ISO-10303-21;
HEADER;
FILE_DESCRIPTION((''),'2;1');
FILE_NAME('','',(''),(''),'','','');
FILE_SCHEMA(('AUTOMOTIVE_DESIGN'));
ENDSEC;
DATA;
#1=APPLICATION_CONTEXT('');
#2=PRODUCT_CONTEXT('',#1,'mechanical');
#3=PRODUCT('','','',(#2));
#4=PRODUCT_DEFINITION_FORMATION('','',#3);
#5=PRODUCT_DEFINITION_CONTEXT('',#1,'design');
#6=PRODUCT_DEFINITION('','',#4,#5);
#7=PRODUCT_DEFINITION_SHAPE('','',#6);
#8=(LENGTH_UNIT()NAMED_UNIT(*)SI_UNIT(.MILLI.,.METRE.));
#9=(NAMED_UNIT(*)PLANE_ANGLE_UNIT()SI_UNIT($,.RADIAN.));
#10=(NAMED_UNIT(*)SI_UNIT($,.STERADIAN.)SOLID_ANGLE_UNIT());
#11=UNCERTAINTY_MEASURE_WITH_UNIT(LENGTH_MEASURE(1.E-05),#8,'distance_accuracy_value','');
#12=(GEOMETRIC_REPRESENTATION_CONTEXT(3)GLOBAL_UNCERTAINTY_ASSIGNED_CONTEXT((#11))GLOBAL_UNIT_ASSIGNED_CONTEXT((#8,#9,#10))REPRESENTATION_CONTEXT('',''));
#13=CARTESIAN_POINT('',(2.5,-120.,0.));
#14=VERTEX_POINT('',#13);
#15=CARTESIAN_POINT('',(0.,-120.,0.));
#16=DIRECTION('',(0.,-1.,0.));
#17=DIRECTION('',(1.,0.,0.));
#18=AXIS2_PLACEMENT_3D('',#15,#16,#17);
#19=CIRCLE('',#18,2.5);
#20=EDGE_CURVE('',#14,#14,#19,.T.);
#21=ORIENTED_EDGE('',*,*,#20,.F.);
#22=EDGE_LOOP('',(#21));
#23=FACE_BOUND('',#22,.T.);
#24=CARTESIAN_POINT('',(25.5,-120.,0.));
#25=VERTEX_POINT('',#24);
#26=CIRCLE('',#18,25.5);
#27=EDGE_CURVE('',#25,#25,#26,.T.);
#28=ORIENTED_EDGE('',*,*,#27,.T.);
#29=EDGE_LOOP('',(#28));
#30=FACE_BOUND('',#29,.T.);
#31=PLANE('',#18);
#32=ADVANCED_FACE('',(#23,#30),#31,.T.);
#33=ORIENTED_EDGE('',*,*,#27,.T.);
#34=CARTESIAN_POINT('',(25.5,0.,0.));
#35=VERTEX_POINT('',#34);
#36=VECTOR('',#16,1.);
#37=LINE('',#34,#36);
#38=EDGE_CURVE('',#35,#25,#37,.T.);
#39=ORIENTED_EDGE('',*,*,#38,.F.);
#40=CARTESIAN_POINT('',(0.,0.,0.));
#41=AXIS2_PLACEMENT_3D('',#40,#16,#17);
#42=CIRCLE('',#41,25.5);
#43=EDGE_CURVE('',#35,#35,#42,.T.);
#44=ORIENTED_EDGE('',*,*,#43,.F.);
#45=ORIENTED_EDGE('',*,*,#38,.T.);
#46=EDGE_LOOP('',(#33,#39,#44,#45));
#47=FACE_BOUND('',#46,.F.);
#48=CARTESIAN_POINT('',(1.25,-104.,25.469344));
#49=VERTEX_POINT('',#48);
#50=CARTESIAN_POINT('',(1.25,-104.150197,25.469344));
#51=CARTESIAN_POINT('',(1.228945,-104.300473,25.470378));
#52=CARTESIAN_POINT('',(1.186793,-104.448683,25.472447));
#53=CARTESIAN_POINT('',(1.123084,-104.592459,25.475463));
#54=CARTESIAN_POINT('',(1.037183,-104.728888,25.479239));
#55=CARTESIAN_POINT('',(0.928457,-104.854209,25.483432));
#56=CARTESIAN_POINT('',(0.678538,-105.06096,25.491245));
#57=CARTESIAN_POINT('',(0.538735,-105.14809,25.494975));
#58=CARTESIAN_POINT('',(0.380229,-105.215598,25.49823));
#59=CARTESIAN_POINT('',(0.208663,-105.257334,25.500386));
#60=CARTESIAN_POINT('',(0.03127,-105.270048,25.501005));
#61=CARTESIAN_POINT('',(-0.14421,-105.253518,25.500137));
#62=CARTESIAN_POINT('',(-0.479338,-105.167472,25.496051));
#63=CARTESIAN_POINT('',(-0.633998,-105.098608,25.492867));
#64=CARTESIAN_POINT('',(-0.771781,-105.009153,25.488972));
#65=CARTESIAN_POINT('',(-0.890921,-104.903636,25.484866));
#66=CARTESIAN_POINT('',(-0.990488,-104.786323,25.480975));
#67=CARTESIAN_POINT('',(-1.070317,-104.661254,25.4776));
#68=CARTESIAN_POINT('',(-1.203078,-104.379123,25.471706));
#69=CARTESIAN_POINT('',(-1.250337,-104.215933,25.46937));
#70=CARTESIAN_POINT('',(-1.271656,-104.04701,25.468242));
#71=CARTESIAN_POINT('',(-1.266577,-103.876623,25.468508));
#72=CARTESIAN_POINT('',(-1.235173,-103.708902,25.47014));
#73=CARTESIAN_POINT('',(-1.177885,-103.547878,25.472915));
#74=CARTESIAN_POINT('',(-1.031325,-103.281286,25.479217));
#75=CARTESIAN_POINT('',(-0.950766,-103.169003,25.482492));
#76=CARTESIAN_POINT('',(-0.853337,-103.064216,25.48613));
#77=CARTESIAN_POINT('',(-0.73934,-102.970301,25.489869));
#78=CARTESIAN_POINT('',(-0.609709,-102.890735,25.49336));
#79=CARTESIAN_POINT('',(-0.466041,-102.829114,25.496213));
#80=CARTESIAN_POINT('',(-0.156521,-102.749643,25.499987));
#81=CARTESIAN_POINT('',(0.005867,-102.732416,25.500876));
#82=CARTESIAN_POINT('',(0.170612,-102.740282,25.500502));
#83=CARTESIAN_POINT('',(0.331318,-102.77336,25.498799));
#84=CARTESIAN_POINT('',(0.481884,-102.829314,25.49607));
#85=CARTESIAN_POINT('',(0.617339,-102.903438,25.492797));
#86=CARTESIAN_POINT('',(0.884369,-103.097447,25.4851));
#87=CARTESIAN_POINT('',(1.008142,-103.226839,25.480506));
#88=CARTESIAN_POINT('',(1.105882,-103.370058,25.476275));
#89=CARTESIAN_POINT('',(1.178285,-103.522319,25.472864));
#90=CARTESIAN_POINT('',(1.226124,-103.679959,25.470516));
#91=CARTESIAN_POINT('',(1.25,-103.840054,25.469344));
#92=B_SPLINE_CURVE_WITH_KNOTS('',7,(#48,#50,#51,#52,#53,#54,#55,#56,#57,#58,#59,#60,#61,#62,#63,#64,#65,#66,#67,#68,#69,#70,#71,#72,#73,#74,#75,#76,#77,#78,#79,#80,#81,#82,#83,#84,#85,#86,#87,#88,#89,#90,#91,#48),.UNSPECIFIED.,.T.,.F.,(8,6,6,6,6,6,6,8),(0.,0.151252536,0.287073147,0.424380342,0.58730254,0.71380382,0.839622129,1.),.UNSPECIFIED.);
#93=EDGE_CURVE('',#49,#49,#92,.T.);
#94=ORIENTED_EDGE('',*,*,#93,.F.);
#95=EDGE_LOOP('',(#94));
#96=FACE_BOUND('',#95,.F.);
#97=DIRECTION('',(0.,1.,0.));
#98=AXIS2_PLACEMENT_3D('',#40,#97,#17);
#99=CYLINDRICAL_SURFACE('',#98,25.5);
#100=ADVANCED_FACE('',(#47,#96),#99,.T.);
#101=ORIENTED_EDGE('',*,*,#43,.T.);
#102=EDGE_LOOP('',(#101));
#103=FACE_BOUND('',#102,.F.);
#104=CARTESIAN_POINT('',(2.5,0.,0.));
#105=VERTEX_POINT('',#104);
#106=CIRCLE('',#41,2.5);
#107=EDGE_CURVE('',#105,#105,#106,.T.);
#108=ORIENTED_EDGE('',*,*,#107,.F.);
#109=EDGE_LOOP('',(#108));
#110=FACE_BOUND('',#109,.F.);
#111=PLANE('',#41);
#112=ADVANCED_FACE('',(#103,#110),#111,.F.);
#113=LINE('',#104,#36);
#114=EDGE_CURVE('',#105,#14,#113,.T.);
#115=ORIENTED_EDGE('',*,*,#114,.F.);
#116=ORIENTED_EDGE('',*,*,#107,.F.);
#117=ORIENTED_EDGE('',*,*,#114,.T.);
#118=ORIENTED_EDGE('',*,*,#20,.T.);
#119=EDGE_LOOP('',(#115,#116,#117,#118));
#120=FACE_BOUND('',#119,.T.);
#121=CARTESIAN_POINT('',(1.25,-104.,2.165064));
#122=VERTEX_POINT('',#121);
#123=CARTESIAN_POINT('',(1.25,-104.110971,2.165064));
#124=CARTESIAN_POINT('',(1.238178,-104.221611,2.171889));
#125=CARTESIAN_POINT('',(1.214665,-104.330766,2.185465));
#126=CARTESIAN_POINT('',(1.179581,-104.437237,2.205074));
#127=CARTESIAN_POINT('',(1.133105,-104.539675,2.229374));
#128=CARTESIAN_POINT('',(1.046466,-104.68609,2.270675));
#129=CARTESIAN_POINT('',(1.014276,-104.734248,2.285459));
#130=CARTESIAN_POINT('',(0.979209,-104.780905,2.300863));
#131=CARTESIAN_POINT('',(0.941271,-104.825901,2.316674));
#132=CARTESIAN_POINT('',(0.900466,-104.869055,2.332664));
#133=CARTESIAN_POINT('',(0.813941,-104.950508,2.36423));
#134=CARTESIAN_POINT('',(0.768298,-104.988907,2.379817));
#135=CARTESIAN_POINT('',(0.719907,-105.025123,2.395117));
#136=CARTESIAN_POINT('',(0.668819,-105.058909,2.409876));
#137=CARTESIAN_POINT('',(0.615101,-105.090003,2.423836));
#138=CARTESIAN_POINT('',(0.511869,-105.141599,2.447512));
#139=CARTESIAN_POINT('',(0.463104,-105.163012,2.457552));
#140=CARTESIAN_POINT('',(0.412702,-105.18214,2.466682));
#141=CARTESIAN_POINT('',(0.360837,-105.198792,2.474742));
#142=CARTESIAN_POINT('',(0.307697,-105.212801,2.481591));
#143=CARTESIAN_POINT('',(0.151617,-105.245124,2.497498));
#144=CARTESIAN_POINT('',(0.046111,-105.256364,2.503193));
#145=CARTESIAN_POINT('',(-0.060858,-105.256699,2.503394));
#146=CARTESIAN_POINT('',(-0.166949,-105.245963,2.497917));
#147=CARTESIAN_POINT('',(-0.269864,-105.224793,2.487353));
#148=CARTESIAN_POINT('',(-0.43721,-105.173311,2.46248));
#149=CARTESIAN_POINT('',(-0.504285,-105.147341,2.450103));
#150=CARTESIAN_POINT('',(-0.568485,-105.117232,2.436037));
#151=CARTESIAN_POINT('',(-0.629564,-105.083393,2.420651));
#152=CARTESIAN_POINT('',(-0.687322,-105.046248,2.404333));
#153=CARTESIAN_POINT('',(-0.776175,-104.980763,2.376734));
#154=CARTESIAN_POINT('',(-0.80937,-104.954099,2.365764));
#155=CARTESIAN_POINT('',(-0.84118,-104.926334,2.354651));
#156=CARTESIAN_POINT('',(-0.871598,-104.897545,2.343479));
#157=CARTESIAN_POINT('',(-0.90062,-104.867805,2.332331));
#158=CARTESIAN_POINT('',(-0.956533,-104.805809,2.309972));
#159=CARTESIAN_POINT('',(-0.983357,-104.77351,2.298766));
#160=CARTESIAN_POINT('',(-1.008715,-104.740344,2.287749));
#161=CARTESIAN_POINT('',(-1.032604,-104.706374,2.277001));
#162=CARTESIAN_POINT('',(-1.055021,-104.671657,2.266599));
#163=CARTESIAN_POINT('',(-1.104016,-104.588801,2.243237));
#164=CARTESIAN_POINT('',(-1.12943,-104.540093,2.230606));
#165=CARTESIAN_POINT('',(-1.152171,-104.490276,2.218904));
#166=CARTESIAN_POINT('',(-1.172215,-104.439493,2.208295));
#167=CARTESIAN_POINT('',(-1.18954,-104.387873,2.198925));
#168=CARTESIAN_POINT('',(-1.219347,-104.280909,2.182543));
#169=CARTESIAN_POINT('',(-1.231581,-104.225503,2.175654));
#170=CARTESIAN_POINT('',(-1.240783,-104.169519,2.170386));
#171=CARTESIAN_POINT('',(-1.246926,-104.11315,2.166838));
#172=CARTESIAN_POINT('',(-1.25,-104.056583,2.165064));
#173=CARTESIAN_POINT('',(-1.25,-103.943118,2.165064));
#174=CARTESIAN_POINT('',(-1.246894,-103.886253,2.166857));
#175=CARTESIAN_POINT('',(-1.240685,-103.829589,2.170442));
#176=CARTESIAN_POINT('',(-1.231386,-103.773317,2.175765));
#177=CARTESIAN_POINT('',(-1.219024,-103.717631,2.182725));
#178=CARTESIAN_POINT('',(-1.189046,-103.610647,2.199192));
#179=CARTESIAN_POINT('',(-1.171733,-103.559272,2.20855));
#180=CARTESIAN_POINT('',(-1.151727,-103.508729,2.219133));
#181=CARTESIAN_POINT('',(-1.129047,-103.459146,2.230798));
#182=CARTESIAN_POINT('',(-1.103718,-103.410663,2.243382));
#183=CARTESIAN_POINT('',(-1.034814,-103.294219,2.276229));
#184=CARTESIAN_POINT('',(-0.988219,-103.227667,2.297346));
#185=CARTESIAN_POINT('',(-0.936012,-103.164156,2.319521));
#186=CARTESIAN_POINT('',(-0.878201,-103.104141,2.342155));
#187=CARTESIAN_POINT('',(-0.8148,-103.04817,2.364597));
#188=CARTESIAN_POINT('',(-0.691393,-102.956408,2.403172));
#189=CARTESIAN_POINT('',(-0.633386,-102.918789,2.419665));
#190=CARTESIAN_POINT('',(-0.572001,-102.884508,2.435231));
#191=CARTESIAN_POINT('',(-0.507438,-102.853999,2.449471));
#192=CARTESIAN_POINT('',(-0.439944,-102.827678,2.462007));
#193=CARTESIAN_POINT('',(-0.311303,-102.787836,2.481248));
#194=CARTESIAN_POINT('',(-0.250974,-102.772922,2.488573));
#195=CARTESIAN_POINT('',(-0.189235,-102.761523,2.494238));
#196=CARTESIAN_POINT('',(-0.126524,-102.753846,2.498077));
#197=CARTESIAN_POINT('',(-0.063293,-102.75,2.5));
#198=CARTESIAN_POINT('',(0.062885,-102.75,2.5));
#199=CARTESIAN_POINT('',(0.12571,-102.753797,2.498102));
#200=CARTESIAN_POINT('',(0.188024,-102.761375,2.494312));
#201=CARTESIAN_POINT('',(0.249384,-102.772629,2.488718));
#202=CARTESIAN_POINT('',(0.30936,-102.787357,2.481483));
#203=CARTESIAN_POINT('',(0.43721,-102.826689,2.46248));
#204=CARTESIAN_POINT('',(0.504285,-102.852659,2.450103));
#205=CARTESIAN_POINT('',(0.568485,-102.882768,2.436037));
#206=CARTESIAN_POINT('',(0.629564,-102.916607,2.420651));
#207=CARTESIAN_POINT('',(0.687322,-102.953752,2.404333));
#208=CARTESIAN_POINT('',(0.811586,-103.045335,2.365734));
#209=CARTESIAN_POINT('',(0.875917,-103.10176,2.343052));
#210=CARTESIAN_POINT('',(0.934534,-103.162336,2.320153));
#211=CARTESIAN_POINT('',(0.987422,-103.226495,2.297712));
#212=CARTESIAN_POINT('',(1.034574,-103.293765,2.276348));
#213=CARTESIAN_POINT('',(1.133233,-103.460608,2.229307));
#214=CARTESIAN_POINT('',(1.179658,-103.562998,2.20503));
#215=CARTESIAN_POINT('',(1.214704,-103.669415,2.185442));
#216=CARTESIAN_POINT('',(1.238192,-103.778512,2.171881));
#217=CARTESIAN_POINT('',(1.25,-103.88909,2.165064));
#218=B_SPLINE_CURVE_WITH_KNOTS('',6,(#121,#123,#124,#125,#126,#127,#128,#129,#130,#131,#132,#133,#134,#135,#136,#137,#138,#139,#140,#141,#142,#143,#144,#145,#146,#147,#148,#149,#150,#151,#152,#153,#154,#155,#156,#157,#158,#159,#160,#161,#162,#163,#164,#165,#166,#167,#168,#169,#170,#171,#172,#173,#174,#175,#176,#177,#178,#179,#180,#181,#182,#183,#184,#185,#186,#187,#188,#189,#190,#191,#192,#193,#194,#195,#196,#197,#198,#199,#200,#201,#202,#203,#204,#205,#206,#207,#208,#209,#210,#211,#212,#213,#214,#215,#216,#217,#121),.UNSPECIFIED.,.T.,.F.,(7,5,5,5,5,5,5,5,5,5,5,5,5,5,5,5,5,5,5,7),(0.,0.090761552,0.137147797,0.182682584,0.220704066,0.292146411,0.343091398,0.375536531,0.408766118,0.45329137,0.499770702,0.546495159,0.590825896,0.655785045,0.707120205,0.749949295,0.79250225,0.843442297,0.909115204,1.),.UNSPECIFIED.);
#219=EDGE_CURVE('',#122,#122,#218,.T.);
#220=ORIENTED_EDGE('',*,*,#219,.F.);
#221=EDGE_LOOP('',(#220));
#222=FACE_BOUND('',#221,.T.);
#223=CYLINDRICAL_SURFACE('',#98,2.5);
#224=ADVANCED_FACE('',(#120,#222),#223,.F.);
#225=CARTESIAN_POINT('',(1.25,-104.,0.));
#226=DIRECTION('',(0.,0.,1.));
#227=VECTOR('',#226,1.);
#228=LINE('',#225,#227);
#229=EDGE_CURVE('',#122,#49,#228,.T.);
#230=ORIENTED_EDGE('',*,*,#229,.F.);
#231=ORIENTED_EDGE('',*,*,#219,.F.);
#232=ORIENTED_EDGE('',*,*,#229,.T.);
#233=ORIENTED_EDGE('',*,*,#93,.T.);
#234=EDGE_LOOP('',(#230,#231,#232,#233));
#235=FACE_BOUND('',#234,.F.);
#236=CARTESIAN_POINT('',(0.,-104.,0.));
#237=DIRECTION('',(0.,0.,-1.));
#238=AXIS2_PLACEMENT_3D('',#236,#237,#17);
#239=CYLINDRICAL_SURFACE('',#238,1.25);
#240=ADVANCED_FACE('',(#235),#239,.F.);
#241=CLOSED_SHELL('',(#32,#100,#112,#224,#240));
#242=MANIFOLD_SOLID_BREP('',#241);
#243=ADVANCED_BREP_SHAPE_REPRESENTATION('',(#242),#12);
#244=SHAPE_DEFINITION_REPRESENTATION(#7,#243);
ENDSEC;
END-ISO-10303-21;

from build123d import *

# Parameters (mm, degrees)
F0_R     = 25.5
F0_R_2   = 2.5
F1_DEPTH = 120
F3_D     = 2.5
F3_DEPTH = 25.501


# Not quite as in the source:
# - a feature names something its author has since deleted; it is built from what else it names


with BuildPart() as f1:
    # F0 (on Front) → F1 (new body)
    with BuildSketch(Plane.XZ):
        Circle(F0_R)
        Circle(F0_R_2, mode=Mode.SUBTRACT)
    extrude(amount=F1_DEPTH)

    # F3 (through all, one way)
    with BuildSketch(Plane(origin=(0, 0, 0), x_dir=(1, 0, 0), z_dir=(0, 0, -1))):
        with Locations((0, 104)):
            Circle(F3_D / 2)
    extrude(amount=-F3_DEPTH, mode=Mode.SUBTRACT)


solid = f1.part
